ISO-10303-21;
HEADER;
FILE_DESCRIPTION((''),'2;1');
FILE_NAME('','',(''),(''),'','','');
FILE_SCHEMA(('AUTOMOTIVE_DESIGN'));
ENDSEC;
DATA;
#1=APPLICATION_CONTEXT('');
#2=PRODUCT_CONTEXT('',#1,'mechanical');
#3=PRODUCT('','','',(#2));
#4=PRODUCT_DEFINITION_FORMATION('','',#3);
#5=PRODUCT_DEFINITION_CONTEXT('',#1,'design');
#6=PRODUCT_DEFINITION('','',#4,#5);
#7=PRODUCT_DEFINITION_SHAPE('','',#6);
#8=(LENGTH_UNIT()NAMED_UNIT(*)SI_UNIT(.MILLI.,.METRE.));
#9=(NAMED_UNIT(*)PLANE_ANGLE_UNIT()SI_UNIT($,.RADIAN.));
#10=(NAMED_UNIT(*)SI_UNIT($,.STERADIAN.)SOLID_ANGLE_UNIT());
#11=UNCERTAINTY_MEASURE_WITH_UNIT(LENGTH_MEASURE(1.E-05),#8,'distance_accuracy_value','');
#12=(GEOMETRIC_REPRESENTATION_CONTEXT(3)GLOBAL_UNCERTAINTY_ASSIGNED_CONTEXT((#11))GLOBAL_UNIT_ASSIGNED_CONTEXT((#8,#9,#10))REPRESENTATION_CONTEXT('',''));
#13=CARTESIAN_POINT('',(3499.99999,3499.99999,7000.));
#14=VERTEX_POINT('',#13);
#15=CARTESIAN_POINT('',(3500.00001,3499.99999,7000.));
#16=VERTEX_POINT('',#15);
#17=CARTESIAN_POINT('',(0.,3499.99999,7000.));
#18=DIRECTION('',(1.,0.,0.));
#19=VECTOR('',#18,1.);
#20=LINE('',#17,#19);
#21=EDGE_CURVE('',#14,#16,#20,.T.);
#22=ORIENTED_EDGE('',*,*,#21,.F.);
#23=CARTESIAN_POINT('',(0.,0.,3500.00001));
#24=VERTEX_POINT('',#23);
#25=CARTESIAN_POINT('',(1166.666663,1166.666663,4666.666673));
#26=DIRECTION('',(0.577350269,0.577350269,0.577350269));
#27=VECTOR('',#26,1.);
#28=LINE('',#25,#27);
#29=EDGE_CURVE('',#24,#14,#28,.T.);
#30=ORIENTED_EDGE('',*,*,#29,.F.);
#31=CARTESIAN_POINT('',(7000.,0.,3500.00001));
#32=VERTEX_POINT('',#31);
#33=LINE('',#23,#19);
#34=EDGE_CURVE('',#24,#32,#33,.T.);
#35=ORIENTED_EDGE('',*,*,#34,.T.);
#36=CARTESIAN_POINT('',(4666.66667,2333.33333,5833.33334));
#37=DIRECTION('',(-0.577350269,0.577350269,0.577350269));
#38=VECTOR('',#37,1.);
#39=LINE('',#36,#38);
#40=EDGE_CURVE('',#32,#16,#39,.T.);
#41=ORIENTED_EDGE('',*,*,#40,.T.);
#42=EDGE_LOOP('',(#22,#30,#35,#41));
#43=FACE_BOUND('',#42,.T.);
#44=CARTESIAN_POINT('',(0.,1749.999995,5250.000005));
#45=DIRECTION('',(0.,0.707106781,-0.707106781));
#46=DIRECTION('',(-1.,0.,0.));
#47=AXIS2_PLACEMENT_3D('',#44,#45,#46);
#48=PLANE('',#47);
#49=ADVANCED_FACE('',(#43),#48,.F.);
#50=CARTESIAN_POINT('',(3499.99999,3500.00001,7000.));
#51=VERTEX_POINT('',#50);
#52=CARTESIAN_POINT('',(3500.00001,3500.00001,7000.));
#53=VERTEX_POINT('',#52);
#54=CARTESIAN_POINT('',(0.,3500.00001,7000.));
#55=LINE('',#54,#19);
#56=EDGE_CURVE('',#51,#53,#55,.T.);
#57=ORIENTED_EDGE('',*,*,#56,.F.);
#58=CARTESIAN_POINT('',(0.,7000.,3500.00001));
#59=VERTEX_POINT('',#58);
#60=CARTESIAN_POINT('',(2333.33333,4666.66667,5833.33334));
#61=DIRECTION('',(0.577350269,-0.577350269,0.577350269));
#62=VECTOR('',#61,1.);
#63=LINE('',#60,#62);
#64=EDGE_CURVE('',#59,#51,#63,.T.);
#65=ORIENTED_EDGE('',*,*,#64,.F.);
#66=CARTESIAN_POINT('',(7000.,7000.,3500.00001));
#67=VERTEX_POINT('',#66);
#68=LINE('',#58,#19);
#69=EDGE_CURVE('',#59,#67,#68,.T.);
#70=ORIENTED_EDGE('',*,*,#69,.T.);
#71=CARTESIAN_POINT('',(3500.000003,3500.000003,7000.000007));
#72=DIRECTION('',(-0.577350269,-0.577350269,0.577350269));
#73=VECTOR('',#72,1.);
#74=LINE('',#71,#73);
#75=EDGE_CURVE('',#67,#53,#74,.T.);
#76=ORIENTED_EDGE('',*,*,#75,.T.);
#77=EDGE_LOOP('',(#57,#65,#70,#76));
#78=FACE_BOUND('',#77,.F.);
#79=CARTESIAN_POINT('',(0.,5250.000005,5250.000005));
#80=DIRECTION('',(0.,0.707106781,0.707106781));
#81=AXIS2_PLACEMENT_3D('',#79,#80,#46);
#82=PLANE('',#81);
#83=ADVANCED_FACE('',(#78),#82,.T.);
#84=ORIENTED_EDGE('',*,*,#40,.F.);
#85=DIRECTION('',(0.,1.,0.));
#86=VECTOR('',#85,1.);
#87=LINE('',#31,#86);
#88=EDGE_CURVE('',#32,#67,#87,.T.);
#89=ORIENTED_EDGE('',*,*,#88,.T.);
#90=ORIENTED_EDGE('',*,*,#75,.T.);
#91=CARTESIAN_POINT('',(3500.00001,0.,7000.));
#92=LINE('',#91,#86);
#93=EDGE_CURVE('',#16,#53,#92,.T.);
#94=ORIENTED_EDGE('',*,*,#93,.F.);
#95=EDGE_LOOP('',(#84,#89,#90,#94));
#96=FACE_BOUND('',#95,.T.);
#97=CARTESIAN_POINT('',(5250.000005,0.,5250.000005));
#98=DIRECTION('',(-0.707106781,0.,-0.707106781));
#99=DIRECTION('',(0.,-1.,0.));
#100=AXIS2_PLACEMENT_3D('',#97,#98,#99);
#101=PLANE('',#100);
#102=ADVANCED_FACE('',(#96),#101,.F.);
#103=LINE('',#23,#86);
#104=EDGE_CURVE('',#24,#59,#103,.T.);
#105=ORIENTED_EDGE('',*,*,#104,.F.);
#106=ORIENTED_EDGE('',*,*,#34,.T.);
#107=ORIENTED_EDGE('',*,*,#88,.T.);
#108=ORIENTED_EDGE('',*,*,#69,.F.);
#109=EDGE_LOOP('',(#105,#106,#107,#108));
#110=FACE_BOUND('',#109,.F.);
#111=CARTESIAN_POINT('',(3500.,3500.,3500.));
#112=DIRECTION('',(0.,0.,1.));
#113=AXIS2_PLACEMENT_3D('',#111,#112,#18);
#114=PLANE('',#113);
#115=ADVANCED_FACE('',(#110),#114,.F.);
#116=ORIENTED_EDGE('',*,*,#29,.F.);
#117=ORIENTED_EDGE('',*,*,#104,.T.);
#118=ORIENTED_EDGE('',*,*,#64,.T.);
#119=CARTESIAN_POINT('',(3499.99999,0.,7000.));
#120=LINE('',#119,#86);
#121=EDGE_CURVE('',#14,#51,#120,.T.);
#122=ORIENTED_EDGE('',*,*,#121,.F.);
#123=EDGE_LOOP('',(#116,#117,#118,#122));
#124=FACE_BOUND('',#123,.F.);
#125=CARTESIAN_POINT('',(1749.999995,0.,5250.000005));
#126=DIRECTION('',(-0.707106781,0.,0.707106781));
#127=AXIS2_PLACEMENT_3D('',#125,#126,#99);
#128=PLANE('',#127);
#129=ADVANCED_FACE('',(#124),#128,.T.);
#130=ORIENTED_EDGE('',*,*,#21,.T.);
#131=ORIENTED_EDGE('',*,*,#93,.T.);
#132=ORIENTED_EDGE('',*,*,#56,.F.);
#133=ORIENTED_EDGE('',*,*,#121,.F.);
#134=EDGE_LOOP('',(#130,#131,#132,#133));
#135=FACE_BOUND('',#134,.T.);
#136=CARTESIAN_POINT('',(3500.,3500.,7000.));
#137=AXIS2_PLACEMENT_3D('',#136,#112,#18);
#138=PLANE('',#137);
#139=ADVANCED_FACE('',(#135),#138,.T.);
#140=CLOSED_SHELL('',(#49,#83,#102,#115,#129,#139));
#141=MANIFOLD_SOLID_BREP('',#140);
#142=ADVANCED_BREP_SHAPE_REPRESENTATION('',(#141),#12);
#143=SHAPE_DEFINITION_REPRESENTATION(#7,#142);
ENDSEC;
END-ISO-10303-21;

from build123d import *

# Parameters (mm, degrees)
F0_W     = 7000
F0_H     = 7000
F1_DEPTH = 7000
F2_SIZE  = 3499.99999
F3_DEPTH = 3500


# Not quite as in the source:
# - a fillet or chamfer is up to 0.001 mm smaller than in the source, because OpenCascade refuses the exact size


with BuildPart() as f1:
    # F0 (on Top) → F1 (new body)
    with BuildSketch(Plane.XY):
        with Locations((3500, 3500)):
            Rectangle(F0_W, F0_H)
    extrude(amount=F1_DEPTH)

    # F2 (size 3500 in the source; OpenCascade refuses exactly that, so slightly less here)
    f2_edges = [f1.edges().sort_by_distance(p)[0] for p in [
        (3500, 0, 7000),
        (7000, 3500, 7000),
        (3500, 7000, 7000),
        (0, 3500, 7000),
    ]]
    chamfer(f2_edges, length=F2_SIZE)

    # F3 (cut): a face of the model
    f3_faces = [f1.faces().sort_by_distance(p)[0] for p in [
        (3500, 3500, 0),
    ]]
    extrude(f3_faces, amount=-F3_DEPTH, mode=Mode.SUBTRACT)


solid = f1.part
